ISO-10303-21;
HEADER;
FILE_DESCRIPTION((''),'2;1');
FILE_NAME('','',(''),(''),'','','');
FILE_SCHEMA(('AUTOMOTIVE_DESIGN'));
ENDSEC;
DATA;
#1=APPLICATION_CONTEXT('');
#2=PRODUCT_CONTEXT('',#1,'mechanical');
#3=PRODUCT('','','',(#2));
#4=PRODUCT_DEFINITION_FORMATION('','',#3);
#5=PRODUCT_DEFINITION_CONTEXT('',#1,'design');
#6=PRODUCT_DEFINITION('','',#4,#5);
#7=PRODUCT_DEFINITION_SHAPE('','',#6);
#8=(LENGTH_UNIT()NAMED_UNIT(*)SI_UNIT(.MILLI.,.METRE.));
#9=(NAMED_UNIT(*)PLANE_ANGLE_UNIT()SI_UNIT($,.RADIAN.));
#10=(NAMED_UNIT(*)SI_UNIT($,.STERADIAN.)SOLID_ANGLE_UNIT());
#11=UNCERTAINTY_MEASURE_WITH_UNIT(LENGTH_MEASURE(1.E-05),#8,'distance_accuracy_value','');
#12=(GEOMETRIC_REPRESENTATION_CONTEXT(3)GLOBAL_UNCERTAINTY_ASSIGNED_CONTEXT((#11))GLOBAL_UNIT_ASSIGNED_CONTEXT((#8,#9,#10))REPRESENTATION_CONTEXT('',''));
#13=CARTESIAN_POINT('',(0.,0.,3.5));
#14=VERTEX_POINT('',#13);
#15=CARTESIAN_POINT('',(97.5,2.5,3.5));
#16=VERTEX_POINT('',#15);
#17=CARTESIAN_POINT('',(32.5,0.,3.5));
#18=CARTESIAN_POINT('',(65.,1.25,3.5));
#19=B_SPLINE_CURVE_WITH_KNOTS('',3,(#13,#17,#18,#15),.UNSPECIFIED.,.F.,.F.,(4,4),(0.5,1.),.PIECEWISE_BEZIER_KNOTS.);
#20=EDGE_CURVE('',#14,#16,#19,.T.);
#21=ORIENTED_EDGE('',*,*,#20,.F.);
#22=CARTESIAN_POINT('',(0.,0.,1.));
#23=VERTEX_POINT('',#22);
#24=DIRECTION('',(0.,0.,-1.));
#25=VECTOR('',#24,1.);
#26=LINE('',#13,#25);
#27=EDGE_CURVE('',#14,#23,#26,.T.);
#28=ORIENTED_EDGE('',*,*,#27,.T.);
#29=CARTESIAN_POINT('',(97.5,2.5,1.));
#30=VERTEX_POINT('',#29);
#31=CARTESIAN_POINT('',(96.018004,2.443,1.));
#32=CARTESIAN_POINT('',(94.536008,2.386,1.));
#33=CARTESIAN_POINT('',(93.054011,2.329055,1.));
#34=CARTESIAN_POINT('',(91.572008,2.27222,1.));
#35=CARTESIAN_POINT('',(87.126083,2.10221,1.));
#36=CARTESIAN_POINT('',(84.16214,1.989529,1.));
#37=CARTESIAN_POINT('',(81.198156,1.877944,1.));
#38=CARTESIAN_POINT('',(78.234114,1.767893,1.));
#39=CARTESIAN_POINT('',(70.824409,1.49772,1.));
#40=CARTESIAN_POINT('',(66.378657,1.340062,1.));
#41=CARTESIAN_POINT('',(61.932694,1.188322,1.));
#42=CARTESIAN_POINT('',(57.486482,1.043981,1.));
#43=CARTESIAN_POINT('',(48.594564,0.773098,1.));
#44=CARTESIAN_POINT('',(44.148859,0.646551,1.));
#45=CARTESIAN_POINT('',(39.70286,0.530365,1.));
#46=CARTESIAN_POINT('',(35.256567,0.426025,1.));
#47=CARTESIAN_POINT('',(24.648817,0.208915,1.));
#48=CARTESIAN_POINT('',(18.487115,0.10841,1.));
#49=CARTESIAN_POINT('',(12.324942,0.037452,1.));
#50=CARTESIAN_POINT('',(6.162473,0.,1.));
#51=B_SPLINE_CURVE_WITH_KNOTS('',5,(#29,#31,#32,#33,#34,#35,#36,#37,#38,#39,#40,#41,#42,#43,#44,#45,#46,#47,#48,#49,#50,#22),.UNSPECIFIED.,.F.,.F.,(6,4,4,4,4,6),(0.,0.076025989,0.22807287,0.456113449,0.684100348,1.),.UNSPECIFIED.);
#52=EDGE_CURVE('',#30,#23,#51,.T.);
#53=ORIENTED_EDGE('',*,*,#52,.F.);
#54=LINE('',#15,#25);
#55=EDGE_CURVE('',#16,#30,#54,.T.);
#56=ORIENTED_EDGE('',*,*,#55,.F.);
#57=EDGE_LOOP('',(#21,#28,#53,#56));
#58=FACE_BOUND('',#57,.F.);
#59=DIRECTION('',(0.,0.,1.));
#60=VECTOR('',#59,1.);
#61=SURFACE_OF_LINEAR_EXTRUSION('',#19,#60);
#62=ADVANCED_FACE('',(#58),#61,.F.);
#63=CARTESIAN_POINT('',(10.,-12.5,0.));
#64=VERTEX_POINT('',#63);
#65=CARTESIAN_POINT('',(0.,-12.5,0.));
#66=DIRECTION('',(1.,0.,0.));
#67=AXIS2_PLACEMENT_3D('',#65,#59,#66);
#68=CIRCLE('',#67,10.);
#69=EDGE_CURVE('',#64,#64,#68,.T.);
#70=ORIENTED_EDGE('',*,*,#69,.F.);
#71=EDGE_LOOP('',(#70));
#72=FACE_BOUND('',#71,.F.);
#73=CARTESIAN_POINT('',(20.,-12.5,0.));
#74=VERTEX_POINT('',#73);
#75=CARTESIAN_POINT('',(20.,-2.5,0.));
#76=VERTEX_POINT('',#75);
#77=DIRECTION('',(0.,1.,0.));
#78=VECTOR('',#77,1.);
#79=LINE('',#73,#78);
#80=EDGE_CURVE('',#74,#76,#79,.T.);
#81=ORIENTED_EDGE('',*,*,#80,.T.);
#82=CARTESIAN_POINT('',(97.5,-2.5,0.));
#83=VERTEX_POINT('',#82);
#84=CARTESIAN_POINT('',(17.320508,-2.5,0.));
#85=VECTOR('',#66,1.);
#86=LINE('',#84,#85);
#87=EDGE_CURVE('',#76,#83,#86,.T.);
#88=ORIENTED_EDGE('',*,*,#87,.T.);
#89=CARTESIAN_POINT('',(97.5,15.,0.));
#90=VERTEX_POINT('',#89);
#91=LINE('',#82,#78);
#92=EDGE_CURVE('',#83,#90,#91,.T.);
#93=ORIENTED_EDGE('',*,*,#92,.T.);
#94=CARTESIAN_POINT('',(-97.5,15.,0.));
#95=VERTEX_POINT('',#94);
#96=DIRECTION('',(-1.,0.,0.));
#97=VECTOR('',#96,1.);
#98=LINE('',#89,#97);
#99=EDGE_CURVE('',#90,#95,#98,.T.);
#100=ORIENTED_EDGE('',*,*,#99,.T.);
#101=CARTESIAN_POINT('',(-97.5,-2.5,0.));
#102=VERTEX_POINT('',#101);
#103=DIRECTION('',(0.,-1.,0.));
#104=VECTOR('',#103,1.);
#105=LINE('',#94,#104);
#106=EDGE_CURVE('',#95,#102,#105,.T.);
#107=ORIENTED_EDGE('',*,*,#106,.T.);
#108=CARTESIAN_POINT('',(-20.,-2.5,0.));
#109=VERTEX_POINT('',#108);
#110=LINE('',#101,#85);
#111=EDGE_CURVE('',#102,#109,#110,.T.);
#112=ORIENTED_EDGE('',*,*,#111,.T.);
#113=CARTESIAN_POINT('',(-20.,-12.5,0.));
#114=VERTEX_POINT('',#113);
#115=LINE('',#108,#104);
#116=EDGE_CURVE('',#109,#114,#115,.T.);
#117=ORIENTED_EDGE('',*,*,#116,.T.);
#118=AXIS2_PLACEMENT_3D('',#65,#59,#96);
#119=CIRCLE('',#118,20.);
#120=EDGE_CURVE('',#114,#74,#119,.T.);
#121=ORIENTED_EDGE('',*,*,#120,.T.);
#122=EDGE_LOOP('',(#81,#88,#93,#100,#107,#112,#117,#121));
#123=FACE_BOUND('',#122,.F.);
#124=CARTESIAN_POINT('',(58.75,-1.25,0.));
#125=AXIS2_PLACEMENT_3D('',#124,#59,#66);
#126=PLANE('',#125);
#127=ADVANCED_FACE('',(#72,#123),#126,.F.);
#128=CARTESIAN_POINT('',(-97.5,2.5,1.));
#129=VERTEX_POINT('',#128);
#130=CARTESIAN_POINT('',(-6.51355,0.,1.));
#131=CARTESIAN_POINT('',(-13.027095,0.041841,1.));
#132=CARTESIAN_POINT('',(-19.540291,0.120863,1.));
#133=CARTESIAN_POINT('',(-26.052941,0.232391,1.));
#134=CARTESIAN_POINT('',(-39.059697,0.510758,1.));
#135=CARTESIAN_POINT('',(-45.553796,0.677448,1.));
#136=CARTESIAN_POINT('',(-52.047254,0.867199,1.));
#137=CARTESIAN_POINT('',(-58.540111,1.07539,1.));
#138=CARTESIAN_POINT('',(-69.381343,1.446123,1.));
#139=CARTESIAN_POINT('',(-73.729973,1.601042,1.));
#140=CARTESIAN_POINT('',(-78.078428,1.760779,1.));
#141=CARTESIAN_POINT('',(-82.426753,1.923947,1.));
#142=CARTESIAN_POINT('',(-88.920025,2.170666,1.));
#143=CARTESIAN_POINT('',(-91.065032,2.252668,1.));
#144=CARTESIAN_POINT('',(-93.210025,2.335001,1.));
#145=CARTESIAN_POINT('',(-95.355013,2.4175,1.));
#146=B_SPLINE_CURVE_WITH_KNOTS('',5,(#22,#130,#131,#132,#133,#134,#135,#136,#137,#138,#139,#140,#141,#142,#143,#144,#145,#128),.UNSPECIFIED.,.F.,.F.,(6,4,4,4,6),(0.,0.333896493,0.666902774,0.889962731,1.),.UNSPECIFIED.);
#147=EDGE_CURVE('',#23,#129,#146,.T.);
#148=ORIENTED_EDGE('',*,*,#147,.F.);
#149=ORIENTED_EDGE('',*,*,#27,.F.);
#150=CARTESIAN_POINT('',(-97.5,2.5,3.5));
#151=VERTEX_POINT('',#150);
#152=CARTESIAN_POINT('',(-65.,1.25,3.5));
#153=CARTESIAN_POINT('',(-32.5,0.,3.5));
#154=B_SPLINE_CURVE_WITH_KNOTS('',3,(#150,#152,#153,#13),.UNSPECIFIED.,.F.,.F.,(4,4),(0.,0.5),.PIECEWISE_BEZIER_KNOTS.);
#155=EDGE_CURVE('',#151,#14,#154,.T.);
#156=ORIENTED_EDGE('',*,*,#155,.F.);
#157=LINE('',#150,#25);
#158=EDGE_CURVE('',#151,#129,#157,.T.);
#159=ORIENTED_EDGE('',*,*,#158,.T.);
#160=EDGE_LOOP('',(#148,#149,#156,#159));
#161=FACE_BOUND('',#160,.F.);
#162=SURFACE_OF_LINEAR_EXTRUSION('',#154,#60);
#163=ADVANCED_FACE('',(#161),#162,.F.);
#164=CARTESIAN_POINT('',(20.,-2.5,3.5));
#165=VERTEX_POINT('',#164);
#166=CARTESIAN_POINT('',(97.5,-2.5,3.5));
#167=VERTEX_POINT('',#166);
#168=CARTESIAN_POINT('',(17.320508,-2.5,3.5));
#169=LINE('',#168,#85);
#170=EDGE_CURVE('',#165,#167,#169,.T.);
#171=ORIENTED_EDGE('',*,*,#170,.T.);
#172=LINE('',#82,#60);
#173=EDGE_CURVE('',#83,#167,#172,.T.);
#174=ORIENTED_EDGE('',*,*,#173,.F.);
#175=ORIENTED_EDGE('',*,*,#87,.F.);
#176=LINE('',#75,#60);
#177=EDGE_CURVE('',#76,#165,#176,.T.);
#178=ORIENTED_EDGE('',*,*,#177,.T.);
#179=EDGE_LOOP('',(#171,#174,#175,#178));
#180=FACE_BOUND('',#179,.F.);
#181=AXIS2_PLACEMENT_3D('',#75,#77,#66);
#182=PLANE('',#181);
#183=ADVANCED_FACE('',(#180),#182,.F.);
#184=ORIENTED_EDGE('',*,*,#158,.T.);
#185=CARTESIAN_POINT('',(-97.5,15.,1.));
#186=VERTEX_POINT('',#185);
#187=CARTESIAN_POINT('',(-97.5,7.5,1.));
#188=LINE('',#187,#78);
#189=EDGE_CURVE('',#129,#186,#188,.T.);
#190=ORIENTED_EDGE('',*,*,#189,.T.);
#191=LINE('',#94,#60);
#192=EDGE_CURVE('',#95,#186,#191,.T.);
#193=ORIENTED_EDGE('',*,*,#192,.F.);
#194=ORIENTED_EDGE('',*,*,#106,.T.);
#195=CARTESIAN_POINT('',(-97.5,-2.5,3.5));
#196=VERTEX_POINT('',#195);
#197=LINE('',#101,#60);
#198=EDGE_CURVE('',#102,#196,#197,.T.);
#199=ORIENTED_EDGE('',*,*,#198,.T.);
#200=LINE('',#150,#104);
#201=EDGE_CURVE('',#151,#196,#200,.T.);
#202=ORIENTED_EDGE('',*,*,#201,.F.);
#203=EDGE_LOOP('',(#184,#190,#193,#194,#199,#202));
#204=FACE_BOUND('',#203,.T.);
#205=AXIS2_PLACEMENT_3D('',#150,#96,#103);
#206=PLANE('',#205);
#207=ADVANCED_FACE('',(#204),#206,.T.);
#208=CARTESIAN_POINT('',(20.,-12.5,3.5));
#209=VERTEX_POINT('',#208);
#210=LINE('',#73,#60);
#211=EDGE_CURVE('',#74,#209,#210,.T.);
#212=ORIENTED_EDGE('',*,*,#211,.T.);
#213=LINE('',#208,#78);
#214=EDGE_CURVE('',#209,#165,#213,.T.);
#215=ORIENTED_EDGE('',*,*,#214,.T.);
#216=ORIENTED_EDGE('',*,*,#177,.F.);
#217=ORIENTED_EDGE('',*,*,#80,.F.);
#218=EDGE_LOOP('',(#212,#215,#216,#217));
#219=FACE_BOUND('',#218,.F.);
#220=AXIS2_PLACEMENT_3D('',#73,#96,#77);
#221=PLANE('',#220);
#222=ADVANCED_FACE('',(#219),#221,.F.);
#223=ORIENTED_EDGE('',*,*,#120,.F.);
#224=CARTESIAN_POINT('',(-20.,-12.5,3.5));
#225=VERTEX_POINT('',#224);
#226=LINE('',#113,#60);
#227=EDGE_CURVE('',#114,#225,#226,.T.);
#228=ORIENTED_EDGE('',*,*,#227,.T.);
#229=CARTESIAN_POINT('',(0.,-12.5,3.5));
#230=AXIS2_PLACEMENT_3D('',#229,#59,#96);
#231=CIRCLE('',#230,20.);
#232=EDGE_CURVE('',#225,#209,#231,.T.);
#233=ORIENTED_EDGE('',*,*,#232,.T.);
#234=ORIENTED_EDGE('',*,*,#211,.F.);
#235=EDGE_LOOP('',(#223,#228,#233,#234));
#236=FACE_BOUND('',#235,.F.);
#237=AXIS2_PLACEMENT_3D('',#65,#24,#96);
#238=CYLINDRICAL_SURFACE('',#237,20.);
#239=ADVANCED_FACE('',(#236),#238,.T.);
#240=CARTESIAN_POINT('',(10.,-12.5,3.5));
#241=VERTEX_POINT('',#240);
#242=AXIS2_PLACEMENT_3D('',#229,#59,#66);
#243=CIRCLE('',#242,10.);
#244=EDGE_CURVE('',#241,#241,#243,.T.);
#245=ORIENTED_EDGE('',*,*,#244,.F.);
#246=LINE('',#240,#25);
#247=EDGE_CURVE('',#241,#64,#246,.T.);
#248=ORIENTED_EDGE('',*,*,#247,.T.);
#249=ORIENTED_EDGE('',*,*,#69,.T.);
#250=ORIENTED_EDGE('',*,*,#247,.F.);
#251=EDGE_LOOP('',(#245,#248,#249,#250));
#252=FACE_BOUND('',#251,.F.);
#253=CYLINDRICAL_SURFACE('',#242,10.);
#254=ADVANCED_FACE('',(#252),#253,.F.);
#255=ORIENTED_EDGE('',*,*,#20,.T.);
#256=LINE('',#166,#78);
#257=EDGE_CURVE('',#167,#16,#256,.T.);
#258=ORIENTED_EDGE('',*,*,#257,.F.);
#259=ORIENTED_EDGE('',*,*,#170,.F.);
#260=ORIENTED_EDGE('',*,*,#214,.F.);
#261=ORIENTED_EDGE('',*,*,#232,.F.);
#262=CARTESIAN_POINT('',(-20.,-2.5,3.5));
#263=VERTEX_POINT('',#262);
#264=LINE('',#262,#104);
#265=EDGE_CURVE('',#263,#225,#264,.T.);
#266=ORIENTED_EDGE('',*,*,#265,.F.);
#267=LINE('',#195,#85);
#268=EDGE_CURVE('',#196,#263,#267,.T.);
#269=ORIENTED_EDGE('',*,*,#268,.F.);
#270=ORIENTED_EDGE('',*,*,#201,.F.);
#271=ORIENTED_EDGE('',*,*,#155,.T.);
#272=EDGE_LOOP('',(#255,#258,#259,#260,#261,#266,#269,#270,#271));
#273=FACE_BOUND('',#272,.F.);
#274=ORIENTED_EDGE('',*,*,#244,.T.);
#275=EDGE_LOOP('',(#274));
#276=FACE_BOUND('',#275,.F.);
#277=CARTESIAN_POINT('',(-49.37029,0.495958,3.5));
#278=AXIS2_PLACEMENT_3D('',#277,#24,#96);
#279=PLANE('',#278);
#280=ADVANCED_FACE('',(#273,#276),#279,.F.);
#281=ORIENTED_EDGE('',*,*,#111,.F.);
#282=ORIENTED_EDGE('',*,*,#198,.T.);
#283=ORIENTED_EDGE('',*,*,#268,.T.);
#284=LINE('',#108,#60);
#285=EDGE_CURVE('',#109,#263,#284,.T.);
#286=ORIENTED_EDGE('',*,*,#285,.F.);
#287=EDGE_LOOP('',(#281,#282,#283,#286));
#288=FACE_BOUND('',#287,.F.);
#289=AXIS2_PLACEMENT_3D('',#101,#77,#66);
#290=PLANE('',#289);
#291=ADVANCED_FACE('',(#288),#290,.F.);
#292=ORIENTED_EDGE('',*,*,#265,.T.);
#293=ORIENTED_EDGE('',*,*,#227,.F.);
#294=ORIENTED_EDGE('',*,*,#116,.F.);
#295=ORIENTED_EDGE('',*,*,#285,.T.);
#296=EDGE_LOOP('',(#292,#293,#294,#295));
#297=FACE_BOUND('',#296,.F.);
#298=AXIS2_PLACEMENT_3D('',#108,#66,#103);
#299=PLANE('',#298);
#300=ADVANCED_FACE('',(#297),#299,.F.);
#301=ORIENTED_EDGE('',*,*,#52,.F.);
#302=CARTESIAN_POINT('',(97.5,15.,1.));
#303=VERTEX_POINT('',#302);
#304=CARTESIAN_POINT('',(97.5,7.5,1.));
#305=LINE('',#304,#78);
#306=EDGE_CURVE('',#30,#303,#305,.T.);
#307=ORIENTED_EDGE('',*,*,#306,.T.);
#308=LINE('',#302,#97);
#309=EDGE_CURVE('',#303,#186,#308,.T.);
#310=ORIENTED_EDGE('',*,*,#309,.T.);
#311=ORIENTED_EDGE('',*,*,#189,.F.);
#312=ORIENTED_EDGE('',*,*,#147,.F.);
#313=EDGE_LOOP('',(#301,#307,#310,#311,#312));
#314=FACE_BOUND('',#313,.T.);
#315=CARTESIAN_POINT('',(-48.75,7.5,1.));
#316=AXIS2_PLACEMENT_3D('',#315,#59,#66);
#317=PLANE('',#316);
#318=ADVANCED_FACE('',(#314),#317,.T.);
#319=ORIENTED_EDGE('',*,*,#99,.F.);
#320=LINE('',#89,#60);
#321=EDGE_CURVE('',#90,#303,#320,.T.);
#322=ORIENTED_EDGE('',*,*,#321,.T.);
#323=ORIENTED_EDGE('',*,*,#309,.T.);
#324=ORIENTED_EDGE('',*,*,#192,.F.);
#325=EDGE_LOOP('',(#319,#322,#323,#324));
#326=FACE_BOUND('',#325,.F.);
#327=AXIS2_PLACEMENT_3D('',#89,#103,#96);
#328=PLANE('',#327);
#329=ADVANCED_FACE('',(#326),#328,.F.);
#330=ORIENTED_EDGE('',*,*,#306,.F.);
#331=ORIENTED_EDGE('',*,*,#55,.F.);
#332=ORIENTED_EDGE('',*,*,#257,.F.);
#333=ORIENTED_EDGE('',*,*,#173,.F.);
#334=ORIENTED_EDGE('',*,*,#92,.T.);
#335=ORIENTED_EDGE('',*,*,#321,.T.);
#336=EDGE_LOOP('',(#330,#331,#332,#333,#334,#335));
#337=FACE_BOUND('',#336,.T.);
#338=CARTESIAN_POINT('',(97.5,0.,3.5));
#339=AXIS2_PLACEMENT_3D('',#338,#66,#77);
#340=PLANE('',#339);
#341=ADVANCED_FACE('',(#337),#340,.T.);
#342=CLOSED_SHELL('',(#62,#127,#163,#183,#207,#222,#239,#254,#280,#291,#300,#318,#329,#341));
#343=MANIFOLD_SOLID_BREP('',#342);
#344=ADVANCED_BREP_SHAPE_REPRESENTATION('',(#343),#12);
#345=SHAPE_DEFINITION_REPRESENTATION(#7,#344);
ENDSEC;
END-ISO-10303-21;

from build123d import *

# Parameters (mm, degrees)
F0_W      = 97.5
F0_H      = 15
F1_DEPTH  = 1
F2_W      = 77.5
F2_H      = 2.5
F3_DEPTH  = 3.5
F4_DEPTH  = 3.5
F5_R      = 10
F7_DEPTH  = 3.5
F10_DEPTH = 3.5


# Not quite as in the source:
# - a feature of the source that left no trace in its solid (it failed there, or was rolled back) is left out
# - a feature names something its author has since deleted; it is built from what else it names


with BuildPart() as f1:
    # F0 (on Top) → F1 (new body)
    with BuildSketch(Plane.XY):
        with Locations((-48.75, 7.5)):
            Rectangle(F0_W, F0_H)
        with Locations((48.75, 7.5)):
            Rectangle(F0_W, F0_H)
    extrude(amount=F1_DEPTH)

    # F2 (on Top) → F3 (join)
    with BuildSketch(Plane.XY):
        with Locations((58.75, -1.25)):
            Rectangle(F2_W, F2_H)
        with Locations((-58.75, -1.25)):
            Rectangle(F2_W, F2_H)
        with BuildLine():
            ThreePointArc((-17.3205080757, -2.5), (-16.5138781887, -1.2176320229), (-15.612494996, 0))
            Line((-15.612494996, 0), (-20, 0))
            Line((-20, 0), (-20, -2.5))
            Line((-20, -2.5), (-17.3205080757, -2.5))
        make_face()
        with BuildLine():
            ThreePointArc((-20, -12.5), (-19.3185165258, -7.3236190979), (-17.3205080757, -2.5))
            Line((-17.3205080757, -2.5), (-20, -2.5))
            Line((-20, -2.5), (-20, -12.5))
        make_face()
        with BuildLine():
            Line((20, 0), (15.612494996, 0))
            ThreePointArc((15.612494996, 0), (16.5138781887, -1.2176320229), (17.3205080757, -2.5))
            Line((17.3205080757, -2.5), (20, -2.5))
            Line((20, -2.5), (20, 0))
        make_face()
        with BuildLine():
            Line((20, -2.5), (17.3205080757, -2.5))
            ThreePointArc((17.3205080757, -2.5), (19.3185165258, -7.3236190979), (20, -12.5))
            Line((20, -12.5), (20, -2.5))
        make_face()
    extrude(amount=F3_DEPTH)

    # F2 (on Top) → F4 (join)
    with BuildSketch(Plane.XY):
        with BuildLine():
            Line((15.612494996, 0), (0, 0))
            Line((0, 0), (-15.612494996, 0))
            ThreePointArc((-15.612494996, 0), (-16.5138781887, -1.2176320229), (-17.3205080757, -2.5))
            Line((-17.3205080757, -2.5), (17.3205080757, -2.5))
            ThreePointArc((17.3205080757, -2.5), (16.5138781887, -1.2176320229), (15.612494996, 0))
        make_face()
        with BuildLine():
            ThreePointArc((20, -12.5), (19.3185165258, -7.3236190979), (17.3205080757, -2.5))
            Line((17.3205080757, -2.5), (-17.3205080757, -2.5))
            ThreePointArc((-17.3205080757, -2.5), (-19.3185165258, -7.3236190979), (-20, -12.5))
            Line((-20, -12.5), (20, -12.5))
        make_face()
        with BuildLine():
            ThreePointArc((-20, -12.5), (0, -32.5), (20, -12.5))
            Line((20, -12.5), (-20, -12.5))
        make_face()
    extrude(amount=F4_DEPTH)

    # F6: union 

    # F5 (on face) → F7 (cut)
    with BuildSketch(Plane.XY.offset(3.5)):
        with Locations((0, -12.5)):
            Circle(F5_R)
    extrude(amount=-F7_DEPTH, mode=Mode.SUBTRACT)

    # F8 (on face) → F10 (join)
    with BuildSketch(Plane.XY.offset(3.5)):
        with BuildLine():
            add(Edge.make_bspline(
                [(-97.5, 2.5), (-65, 1.25), (-32.5, 0), (0, 0)],
                knots=[0, 0, 0, 0, 0.5, 0.5, 0.5, 0.5], degree=3))
            Line((-97.5, 2.5), (-97.5, 0))
            Line((-97.5, 0), (0, 0))
        make_face()
        with BuildLine():
            add(Edge.make_bspline(
                [(0, 0), (32.5, 0), (65, 1.25), (97.5, 2.5)],
                knots=[0.5, 0.5, 0.5, 0.5, 1, 1, 1, 1], degree=3))
            Line((0, 0), (97.5, 0))
            Line((97.5, 0), (97.5, 2.5))
        make_face()
    extrude(amount=-F10_DEPTH)


solid = f1.part
